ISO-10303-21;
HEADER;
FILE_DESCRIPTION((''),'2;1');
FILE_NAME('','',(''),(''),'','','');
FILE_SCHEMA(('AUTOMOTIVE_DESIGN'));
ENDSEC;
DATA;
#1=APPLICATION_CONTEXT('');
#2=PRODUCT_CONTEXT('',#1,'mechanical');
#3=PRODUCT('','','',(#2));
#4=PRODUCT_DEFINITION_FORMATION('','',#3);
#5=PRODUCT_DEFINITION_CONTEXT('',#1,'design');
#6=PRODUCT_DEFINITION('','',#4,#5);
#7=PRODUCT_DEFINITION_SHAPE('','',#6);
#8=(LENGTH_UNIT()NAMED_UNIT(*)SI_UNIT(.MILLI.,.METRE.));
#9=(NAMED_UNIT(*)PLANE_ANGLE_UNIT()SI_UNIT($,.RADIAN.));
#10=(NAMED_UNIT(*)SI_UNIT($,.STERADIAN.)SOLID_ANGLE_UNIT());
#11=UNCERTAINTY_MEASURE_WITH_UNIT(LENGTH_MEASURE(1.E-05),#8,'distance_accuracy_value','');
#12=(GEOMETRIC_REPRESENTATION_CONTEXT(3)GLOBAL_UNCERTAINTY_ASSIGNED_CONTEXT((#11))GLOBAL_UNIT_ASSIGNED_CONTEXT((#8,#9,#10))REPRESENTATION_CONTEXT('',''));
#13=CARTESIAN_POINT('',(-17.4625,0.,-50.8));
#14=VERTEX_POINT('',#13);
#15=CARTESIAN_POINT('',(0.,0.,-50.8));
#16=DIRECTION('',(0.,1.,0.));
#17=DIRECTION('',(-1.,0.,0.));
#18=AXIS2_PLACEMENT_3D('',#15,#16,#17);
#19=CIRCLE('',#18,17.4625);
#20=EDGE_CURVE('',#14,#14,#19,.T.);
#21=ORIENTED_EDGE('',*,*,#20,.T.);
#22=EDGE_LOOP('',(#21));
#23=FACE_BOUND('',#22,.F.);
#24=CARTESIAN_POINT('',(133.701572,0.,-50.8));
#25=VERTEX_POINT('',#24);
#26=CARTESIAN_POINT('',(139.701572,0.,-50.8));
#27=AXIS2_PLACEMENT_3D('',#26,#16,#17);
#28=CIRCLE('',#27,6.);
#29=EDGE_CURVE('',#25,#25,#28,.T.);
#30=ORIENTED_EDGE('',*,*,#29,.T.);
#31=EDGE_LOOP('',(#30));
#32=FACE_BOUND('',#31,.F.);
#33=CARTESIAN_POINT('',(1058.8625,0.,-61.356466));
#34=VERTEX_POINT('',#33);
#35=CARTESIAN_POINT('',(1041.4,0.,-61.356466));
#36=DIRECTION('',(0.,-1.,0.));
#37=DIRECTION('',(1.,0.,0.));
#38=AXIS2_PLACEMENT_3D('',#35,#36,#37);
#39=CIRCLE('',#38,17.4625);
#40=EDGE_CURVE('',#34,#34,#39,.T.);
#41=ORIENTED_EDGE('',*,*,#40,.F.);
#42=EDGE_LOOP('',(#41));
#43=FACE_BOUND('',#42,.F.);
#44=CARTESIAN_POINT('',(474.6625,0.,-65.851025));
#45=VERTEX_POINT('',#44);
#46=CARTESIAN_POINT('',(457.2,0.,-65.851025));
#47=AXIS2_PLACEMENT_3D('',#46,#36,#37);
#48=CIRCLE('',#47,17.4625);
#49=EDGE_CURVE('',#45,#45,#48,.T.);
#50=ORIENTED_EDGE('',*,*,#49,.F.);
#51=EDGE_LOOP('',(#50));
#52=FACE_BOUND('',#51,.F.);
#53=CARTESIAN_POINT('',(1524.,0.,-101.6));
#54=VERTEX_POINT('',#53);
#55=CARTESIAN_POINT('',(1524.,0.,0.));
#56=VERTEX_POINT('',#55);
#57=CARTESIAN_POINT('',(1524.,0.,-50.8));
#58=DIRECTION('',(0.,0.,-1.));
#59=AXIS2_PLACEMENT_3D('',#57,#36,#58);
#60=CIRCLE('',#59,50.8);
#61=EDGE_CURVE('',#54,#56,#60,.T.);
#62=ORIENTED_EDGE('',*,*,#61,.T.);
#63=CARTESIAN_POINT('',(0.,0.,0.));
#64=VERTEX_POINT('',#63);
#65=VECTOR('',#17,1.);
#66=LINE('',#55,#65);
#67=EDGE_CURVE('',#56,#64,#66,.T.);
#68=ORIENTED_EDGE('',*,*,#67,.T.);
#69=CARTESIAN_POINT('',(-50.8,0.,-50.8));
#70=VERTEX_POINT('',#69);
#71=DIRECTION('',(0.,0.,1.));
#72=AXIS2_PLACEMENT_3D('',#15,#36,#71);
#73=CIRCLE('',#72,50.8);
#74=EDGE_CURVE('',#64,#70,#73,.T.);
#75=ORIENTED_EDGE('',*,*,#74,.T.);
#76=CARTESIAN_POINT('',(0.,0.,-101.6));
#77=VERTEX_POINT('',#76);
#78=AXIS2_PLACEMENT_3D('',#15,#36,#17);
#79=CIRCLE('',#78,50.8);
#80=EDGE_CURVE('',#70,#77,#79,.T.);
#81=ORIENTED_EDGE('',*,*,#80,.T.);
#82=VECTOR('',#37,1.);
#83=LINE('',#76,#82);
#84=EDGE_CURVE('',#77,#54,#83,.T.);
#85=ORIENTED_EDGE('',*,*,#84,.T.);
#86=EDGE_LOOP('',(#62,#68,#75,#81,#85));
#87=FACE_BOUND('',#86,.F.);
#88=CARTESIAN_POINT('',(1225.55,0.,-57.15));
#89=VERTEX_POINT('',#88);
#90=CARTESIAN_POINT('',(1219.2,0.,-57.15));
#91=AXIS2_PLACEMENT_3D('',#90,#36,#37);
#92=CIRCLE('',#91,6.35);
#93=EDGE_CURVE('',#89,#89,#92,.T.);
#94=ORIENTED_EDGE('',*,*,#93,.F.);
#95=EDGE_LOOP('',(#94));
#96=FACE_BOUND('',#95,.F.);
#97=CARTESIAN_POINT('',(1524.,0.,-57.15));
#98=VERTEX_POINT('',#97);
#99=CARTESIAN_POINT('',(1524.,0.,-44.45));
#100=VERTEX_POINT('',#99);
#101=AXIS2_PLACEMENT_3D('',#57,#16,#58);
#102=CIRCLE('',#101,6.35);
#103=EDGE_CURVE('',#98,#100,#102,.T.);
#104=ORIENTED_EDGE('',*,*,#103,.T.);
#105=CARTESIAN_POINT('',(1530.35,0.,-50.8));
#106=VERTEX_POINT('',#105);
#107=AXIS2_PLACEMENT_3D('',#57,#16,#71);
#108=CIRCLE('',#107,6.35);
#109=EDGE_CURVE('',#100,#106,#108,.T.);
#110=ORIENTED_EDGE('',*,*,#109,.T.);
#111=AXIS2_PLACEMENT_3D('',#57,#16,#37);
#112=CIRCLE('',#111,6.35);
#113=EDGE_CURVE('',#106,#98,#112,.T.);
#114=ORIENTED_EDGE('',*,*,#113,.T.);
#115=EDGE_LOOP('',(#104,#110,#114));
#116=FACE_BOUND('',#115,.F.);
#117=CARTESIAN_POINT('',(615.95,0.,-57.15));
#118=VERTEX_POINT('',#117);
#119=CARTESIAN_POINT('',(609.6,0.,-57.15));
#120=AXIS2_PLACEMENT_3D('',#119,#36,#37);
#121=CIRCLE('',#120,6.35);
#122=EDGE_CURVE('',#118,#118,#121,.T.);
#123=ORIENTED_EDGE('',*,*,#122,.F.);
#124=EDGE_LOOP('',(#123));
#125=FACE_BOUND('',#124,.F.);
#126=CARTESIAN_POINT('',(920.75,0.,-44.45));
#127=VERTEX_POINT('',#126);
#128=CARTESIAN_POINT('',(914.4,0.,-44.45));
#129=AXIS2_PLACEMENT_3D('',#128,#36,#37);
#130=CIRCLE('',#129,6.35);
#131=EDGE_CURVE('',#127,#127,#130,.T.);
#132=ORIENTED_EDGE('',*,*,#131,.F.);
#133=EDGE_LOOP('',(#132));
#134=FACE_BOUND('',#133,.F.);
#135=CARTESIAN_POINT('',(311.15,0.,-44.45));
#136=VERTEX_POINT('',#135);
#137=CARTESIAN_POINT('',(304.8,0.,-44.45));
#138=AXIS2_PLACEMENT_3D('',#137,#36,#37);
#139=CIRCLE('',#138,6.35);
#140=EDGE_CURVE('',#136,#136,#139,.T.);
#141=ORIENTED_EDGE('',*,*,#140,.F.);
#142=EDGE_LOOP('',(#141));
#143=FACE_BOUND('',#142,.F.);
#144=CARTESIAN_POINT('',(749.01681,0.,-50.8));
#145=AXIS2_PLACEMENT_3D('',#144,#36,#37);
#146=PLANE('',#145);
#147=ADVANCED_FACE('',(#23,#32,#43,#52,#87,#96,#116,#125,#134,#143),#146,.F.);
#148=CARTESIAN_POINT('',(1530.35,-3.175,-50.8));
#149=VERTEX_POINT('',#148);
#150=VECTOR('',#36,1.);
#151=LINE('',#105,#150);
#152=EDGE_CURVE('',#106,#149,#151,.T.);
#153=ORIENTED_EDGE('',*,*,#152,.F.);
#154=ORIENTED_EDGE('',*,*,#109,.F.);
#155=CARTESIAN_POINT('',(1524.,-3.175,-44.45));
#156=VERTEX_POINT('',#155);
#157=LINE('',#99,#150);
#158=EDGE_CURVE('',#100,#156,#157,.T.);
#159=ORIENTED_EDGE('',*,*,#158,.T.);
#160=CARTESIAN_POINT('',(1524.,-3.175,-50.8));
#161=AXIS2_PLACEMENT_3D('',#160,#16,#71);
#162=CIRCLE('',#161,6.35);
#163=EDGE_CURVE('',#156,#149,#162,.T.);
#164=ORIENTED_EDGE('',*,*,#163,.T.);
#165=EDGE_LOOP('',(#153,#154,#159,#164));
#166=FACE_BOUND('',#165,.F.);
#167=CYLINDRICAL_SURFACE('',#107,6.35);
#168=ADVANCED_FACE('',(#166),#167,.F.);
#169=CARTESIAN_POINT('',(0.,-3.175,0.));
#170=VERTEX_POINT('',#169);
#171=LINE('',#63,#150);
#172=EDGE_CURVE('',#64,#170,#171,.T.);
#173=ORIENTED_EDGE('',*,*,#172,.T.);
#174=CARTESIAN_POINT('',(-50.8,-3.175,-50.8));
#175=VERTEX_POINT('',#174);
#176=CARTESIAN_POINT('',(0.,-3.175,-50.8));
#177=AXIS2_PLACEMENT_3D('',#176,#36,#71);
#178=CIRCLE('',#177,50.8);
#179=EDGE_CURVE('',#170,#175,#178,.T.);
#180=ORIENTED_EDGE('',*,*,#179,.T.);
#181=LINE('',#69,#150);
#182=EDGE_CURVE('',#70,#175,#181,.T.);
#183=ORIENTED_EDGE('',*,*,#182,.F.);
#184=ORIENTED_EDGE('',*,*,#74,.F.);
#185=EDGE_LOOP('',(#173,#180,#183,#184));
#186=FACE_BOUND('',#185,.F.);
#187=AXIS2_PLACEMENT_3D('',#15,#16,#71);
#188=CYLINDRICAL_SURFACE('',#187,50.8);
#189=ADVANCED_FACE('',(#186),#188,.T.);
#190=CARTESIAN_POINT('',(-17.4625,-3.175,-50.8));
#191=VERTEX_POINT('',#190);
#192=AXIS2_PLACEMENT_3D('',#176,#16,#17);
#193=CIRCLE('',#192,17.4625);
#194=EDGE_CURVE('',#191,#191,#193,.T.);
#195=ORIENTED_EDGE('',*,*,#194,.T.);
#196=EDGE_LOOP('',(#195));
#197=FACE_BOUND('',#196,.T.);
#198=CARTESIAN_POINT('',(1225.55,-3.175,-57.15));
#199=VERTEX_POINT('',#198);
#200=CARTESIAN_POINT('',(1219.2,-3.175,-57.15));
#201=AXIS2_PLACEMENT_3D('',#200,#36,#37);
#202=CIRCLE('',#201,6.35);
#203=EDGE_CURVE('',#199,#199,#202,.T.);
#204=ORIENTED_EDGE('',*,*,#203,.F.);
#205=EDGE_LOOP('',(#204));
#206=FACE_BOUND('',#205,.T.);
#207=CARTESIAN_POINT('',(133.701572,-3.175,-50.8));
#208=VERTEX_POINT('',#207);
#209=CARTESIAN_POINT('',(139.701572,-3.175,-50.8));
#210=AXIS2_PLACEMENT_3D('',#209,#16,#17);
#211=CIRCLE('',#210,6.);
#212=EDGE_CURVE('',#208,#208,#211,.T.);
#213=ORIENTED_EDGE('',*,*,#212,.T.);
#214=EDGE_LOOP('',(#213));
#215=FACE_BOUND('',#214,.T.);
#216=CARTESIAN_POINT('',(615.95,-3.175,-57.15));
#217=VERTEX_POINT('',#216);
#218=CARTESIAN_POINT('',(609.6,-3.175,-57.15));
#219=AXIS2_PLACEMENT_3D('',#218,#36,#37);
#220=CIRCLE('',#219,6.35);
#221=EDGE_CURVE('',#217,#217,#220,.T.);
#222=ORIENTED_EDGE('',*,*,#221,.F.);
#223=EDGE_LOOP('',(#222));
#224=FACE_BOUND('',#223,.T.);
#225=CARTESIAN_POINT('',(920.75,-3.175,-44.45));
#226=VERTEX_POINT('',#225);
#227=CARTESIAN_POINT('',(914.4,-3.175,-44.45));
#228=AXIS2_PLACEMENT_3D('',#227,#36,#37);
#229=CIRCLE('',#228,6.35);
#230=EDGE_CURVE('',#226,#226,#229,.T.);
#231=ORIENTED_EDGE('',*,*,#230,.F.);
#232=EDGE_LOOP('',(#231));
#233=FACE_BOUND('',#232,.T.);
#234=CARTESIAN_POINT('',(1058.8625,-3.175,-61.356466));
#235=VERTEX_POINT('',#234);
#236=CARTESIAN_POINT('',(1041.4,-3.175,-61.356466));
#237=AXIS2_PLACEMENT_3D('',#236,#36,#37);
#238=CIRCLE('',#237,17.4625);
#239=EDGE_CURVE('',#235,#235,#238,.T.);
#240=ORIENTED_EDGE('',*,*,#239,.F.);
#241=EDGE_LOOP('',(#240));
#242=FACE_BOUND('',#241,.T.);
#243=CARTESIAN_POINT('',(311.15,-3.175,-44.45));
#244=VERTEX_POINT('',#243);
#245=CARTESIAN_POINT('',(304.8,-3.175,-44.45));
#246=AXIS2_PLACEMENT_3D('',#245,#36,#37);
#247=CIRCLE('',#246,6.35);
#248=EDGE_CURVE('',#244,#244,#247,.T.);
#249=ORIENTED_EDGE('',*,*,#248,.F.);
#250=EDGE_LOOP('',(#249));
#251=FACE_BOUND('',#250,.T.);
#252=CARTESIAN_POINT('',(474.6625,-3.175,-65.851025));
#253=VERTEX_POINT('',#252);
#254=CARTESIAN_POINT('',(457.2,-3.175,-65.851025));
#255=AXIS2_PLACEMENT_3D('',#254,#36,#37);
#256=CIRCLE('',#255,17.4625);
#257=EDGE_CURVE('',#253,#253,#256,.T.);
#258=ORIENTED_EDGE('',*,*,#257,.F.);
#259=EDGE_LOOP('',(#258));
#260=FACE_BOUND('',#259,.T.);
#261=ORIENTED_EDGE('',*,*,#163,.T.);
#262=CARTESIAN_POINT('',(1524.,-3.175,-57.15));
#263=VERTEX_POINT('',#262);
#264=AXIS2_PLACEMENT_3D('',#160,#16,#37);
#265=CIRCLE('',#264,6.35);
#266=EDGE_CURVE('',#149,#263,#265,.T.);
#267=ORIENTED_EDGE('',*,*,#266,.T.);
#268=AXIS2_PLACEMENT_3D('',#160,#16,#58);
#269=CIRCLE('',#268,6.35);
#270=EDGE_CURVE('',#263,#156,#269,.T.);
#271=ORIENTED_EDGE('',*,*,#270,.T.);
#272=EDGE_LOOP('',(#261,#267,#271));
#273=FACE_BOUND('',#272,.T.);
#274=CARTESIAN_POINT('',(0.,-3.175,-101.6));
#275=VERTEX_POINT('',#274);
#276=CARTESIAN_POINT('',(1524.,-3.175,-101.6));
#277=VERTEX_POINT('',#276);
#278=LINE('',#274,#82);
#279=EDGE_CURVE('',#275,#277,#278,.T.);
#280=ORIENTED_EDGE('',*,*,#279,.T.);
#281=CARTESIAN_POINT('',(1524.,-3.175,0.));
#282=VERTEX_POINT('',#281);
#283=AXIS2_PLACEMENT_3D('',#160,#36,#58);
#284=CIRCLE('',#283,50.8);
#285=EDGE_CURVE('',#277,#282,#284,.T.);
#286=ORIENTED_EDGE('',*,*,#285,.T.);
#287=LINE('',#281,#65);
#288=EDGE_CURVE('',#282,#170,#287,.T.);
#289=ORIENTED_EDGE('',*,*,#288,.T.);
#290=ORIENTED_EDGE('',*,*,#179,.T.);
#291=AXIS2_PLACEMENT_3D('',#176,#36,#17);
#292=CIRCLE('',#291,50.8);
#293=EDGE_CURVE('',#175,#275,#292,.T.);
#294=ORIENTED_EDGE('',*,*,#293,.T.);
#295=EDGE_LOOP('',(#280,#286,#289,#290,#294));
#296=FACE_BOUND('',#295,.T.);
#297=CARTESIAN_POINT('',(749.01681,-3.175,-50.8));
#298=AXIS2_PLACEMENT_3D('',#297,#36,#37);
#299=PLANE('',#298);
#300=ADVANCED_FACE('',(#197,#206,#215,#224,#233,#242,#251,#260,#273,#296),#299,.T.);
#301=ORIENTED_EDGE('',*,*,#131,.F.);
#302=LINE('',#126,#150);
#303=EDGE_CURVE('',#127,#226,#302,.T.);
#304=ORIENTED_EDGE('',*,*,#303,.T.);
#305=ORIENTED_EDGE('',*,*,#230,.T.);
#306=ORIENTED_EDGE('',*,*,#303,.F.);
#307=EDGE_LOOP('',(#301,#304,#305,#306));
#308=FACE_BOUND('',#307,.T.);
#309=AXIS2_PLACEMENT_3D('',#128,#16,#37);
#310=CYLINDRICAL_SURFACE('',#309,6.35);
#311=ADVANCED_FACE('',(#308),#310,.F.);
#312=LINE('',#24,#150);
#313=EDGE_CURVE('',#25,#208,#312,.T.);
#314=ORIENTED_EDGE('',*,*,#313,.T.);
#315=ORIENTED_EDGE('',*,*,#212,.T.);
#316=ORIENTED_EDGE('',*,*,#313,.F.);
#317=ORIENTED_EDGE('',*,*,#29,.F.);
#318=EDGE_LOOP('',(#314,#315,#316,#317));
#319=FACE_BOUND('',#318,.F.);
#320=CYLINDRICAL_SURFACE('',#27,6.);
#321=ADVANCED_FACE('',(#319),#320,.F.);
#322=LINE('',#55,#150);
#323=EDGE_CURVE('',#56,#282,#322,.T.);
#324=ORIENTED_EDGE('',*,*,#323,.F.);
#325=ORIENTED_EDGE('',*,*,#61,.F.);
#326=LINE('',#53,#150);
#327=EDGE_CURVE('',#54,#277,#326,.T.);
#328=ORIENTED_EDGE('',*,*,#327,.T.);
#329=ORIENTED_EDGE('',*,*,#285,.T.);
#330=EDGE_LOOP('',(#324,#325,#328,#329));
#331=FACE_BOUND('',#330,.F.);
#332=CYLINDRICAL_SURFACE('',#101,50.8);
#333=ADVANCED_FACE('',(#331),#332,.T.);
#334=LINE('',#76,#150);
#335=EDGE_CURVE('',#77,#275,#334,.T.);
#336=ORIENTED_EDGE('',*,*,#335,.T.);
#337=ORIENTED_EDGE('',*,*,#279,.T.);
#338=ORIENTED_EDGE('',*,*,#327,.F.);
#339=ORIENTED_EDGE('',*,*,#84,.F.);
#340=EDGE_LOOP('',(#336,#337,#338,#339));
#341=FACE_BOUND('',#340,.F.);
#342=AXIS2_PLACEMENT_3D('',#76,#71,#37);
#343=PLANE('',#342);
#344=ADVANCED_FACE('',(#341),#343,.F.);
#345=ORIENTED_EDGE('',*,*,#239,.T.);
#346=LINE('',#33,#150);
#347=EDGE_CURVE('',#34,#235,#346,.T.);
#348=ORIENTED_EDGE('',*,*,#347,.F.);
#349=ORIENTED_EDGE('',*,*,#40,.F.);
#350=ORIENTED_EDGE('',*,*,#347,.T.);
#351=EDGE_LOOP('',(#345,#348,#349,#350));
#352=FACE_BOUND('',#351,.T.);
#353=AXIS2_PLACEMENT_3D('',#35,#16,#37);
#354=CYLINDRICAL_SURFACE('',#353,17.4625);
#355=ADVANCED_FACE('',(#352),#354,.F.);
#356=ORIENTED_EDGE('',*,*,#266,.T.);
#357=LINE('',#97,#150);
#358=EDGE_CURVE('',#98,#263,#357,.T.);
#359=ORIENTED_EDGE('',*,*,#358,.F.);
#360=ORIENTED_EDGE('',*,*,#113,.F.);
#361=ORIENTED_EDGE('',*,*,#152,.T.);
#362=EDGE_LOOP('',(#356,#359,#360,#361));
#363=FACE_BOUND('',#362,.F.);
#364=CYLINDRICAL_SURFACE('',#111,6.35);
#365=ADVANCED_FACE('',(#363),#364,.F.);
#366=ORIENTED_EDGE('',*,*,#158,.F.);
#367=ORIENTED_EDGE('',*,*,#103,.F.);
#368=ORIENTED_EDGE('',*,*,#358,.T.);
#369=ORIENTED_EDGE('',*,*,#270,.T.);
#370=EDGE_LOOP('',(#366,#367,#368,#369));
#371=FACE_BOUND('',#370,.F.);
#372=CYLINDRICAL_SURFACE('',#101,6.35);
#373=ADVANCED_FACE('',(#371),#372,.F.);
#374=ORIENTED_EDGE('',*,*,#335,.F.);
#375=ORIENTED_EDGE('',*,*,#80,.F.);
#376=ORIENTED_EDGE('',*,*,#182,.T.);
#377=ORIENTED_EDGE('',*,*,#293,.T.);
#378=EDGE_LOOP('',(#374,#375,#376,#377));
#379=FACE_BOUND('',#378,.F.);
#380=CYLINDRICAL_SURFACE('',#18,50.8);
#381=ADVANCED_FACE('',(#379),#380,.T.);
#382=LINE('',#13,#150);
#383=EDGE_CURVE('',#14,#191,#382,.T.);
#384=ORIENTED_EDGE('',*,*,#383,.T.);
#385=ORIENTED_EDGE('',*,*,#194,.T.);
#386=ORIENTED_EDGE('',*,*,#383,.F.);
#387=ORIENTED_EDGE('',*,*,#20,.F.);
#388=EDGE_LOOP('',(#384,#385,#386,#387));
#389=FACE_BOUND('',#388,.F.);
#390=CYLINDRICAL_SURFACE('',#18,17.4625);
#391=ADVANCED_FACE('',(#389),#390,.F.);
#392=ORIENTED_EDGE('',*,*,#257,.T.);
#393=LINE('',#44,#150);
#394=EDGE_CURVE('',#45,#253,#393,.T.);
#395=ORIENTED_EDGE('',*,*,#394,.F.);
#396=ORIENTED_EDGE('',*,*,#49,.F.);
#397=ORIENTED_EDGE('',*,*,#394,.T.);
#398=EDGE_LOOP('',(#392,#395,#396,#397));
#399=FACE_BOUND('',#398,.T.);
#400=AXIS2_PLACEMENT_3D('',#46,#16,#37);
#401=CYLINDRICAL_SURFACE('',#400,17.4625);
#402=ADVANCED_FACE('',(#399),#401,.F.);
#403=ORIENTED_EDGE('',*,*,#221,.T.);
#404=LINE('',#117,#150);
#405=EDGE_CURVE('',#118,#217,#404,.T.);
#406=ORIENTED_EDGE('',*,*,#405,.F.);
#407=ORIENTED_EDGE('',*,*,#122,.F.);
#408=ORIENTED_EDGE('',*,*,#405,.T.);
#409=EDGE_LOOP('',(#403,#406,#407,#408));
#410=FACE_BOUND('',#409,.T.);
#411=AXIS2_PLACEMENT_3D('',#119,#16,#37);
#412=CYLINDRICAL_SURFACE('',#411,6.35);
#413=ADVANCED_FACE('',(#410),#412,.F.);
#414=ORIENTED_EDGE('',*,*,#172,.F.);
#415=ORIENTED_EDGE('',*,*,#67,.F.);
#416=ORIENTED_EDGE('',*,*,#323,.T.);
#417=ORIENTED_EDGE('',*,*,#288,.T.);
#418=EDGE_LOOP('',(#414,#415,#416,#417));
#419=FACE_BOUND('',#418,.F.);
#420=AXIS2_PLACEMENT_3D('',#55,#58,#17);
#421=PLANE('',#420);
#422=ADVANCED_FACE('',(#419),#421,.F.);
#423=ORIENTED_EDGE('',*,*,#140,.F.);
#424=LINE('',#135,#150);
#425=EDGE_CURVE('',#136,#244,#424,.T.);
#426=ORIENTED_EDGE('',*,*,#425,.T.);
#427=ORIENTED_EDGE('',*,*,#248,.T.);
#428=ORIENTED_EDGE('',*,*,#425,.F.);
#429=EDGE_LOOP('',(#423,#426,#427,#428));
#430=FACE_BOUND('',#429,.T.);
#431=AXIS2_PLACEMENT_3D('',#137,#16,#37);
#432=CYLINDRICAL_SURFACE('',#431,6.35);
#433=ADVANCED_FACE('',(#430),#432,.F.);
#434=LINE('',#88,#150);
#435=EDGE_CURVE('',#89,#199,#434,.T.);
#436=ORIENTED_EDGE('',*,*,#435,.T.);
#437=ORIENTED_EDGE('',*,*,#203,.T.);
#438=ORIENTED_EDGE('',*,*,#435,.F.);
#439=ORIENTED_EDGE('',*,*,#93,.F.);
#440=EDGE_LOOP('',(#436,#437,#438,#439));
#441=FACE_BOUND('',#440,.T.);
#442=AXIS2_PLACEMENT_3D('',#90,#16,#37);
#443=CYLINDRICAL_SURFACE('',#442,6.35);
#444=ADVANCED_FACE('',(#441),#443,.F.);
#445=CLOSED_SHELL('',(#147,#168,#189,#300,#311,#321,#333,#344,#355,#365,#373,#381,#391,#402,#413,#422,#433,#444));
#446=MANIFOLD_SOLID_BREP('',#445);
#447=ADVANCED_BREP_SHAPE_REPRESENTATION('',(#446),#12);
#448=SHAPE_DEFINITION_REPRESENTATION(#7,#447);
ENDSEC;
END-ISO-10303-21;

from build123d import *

# Parameters (mm, degrees)
F0_R     = 17.4625
F0_R_2   = 6.35
F1_DEPTH = 3.175


# Not quite as in the source:
# - a feature names something its author has since deleted; it is built from what else it names


with BuildPart() as f1:
    # F0 (on Front) → F1 (new body)
    with BuildSketch(Plane.XZ):
        with BuildLine():
            Line((0, -101.6), (1524, -101.6))
            Line((1524, -101.6), (1524, -57.15))
            ThreePointArc((1524, -57.15), (1517.65, -50.8), (1524, -44.45))
            Line((1524, -44.45), (1524, 0))
            Line((1524, 0), (0, 0))
            ThreePointArc((0, 0), (-35.9210244843, -14.8789755157), (-50.8, -50.8))
            ThreePointArc((-50.8, -50.8), (-35.9210244843, -86.7210244843), (0, -101.6))
        make_face()
        with BuildLine():
            ThreePointArc((17.4625, -50.8), (0, -68.2625), (-17.4625, -50.8))
            ThreePointArc((-17.4625, -50.8), (0, -33.3375), (17.4625, -50.8))
        make_face(mode=Mode.SUBTRACT)
        with BuildLine():
            ThreePointArc((145.7015722418, -50.8), (139.7015722418, -56.8), (133.7015722418, -50.8))
            ThreePointArc((133.7015722418, -50.8), (139.7015722418, -44.8), (145.7015722418, -50.8))
        make_face(mode=Mode.SUBTRACT)
        with Locations((457.2, -65.8510252833)):
            Circle(F0_R, mode=Mode.SUBTRACT)
        with Locations((609.6, -57.15)):
            Circle(F0_R_2, mode=Mode.SUBTRACT)
        with Locations((1041.4, -61.3564662635)):
            Circle(F0_R, mode=Mode.SUBTRACT)
        with Locations((1219.2, -57.15)):
            Circle(F0_R_2, mode=Mode.SUBTRACT)
        with Locations((304.8, -44.45)):
            Circle(F0_R_2, mode=Mode.SUBTRACT)
        with Locations((914.4, -44.45)):
            Circle(F0_R_2, mode=Mode.SUBTRACT)
        with BuildLine():
            Line((1524, -57.15), (1524, -101.6))
            ThreePointArc((1524, -101.6), (1574.8, -50.8), (1524, 0))
            Line((1524, 0), (1524, -44.45))
            ThreePointArc((1524, -44.45), (1528.4901280605, -46.3098719395), (1530.35, -50.8))
            ThreePointArc((1530.35, -50.8), (1528.4901280605, -55.2901280605), (1524, -57.15))
        make_face()
    extrude(amount=F1_DEPTH)


solid = f1.part
